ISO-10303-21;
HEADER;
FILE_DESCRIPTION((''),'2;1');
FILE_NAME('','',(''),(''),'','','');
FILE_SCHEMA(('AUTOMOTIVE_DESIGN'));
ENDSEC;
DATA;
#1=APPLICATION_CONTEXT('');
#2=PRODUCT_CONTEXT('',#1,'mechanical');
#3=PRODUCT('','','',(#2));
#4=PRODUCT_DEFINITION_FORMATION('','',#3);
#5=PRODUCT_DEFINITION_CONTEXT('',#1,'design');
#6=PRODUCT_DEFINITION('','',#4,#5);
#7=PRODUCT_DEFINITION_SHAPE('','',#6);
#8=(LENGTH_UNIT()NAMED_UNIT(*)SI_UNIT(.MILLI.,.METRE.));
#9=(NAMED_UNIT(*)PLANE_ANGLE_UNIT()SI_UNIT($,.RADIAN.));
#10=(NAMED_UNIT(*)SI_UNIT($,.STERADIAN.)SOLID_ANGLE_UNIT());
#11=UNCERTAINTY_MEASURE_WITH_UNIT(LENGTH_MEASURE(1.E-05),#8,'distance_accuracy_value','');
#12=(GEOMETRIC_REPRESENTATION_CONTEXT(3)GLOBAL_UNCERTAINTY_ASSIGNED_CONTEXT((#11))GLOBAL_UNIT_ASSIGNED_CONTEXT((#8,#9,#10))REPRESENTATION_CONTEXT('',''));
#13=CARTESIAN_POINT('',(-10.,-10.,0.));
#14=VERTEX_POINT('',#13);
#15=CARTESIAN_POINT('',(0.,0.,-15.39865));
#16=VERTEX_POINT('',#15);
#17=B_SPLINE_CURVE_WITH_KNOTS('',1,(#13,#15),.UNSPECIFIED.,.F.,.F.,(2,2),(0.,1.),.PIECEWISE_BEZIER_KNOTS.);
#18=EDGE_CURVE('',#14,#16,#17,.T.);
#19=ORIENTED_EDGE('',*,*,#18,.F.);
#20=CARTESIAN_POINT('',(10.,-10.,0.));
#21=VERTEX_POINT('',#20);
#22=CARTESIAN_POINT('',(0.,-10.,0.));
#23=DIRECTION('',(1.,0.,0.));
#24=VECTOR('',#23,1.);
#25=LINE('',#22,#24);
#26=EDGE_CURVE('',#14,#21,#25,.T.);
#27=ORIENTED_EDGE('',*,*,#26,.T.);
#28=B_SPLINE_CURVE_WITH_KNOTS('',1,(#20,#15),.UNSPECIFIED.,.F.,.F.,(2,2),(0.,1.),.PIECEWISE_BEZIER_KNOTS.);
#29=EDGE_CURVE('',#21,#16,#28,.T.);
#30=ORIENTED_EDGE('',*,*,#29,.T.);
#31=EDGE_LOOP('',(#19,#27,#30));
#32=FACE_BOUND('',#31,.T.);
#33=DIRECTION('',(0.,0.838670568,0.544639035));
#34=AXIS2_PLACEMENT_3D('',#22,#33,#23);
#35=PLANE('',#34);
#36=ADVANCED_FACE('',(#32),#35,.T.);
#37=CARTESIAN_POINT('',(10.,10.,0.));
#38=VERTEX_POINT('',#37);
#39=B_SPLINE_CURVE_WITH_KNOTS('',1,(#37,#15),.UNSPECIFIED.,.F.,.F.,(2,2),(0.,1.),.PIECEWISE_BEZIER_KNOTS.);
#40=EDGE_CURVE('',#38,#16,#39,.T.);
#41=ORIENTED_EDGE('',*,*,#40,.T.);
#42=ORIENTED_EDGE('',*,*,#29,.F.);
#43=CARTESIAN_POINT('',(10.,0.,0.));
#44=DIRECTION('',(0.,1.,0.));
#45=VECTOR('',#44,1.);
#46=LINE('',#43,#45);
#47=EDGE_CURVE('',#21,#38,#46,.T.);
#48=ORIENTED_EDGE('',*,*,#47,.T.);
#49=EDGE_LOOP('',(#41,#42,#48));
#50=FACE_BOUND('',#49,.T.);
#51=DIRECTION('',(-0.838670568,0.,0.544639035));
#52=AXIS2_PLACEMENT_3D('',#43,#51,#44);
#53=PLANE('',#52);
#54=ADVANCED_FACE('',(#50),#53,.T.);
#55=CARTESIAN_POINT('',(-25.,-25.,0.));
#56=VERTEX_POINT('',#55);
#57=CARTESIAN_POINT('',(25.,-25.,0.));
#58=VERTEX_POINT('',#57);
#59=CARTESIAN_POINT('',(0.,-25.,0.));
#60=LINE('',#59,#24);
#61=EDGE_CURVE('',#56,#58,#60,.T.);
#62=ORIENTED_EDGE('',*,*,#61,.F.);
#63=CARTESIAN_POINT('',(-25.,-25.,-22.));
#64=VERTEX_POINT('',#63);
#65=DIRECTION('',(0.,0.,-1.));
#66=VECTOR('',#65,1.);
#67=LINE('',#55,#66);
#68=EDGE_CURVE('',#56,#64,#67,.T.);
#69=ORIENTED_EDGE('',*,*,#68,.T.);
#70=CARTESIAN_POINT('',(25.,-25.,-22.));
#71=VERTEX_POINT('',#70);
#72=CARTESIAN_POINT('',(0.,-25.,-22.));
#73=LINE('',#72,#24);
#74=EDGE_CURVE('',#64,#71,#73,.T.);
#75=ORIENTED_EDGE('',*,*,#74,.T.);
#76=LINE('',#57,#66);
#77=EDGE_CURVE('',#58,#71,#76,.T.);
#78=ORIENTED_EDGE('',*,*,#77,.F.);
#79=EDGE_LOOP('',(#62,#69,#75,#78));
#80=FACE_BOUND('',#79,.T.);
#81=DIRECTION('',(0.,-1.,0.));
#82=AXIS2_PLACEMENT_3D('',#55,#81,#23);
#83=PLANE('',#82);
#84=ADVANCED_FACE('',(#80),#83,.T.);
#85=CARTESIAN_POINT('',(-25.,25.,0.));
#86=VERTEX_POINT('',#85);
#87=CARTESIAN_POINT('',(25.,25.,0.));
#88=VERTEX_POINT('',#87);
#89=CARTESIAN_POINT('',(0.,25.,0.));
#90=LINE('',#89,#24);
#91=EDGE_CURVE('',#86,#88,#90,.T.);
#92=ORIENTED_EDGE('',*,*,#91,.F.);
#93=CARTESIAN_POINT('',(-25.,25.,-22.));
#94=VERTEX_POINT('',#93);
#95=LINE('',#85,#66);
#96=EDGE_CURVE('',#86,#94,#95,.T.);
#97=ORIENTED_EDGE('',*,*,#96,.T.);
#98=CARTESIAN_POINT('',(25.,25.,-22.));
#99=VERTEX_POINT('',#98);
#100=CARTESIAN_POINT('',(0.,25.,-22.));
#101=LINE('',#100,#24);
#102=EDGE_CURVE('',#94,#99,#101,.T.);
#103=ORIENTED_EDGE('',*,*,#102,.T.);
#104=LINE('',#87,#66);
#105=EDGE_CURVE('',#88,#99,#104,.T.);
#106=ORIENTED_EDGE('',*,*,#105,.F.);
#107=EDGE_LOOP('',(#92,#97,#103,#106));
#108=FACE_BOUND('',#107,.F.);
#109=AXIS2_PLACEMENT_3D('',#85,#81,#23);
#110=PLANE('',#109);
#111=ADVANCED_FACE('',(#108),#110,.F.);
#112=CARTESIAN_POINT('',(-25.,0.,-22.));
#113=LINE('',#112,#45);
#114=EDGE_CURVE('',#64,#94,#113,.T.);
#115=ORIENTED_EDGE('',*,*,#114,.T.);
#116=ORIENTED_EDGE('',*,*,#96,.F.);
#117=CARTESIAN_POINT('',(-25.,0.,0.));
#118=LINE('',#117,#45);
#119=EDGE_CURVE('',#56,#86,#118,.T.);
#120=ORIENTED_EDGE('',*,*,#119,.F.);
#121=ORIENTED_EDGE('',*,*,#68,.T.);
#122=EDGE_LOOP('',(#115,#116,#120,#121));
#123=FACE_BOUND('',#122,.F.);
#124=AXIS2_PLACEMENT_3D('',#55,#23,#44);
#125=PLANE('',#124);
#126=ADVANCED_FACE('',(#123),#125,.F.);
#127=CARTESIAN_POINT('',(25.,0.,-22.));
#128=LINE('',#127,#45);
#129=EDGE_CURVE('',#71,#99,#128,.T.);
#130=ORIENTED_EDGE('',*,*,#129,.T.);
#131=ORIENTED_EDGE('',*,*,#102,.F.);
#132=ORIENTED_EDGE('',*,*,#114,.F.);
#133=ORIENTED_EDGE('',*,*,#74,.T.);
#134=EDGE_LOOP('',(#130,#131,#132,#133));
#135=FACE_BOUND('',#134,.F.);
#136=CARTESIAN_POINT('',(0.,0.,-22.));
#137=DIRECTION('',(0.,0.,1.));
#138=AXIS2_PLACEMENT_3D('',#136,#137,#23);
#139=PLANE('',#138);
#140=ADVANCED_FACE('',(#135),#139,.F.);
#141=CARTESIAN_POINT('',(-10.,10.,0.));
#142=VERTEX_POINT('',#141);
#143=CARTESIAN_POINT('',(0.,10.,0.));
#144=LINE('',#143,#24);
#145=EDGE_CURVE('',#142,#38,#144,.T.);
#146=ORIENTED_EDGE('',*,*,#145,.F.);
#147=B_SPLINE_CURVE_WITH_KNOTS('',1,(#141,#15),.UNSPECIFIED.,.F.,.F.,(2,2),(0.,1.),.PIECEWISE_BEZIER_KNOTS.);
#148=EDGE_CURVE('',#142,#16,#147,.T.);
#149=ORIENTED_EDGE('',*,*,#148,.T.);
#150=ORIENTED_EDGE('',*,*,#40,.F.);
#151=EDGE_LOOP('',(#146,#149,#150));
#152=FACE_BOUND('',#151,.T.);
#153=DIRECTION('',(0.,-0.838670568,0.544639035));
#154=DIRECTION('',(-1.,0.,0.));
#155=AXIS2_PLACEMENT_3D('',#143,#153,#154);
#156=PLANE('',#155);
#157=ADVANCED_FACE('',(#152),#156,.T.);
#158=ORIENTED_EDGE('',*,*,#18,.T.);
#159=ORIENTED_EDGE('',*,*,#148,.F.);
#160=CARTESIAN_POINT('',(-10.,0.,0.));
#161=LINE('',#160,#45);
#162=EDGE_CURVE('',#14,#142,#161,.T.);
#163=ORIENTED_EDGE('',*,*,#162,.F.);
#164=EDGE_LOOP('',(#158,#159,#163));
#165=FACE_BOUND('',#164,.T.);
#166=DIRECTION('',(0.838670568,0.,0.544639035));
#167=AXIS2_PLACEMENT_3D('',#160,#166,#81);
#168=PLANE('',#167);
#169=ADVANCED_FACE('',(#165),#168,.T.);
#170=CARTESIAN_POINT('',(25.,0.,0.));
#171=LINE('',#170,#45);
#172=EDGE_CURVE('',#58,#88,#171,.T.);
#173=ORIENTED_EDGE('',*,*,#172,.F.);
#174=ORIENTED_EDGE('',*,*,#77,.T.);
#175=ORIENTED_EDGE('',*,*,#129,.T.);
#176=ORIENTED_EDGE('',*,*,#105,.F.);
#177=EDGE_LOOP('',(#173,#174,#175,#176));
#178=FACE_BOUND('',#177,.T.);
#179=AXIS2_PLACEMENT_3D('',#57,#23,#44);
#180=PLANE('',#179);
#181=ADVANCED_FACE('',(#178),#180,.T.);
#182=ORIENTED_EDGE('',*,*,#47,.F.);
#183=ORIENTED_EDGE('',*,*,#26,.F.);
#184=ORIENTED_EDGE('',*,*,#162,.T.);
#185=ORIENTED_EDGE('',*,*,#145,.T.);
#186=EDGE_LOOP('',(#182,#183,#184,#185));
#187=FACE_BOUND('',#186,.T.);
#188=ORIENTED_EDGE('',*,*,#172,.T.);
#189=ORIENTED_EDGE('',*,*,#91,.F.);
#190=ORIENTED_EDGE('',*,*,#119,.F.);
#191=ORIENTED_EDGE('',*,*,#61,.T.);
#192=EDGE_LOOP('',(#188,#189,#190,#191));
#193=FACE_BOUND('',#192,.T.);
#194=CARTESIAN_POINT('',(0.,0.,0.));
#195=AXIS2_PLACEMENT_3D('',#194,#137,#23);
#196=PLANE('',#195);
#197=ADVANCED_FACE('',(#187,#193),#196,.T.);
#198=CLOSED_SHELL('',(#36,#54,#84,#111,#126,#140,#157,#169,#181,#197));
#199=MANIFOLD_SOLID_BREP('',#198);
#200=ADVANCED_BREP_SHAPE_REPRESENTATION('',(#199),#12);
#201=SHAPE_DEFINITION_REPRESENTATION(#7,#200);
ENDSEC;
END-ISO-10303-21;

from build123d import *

# Parameters (mm, degrees)
F0_W     = 50
F0_H     = 50
F2_DEPTH = 22
F1_W     = 20
F1_H     = 20


# Not quite as in the source:
# - an extrude whose draft closes it to a point is written as a loft to that point


with BuildPart() as f2:
    # F0 (on Top) → F2 (new body)
    with BuildSketch(Plane.XY):
        Rectangle(F0_W, F0_H)
    extrude(amount=-F2_DEPTH)

    # F1 (on Top) → F3 section 0
    with BuildSketch(Plane.XY, mode=Mode.PRIVATE) as f3_s0:
        Rectangle(F1_W, F1_H)
    loft([f3_s0.sketch, Vertex(0, 0, -15.3986496381)], ruled=True, mode=Mode.SUBTRACT)


solid = f2.part
